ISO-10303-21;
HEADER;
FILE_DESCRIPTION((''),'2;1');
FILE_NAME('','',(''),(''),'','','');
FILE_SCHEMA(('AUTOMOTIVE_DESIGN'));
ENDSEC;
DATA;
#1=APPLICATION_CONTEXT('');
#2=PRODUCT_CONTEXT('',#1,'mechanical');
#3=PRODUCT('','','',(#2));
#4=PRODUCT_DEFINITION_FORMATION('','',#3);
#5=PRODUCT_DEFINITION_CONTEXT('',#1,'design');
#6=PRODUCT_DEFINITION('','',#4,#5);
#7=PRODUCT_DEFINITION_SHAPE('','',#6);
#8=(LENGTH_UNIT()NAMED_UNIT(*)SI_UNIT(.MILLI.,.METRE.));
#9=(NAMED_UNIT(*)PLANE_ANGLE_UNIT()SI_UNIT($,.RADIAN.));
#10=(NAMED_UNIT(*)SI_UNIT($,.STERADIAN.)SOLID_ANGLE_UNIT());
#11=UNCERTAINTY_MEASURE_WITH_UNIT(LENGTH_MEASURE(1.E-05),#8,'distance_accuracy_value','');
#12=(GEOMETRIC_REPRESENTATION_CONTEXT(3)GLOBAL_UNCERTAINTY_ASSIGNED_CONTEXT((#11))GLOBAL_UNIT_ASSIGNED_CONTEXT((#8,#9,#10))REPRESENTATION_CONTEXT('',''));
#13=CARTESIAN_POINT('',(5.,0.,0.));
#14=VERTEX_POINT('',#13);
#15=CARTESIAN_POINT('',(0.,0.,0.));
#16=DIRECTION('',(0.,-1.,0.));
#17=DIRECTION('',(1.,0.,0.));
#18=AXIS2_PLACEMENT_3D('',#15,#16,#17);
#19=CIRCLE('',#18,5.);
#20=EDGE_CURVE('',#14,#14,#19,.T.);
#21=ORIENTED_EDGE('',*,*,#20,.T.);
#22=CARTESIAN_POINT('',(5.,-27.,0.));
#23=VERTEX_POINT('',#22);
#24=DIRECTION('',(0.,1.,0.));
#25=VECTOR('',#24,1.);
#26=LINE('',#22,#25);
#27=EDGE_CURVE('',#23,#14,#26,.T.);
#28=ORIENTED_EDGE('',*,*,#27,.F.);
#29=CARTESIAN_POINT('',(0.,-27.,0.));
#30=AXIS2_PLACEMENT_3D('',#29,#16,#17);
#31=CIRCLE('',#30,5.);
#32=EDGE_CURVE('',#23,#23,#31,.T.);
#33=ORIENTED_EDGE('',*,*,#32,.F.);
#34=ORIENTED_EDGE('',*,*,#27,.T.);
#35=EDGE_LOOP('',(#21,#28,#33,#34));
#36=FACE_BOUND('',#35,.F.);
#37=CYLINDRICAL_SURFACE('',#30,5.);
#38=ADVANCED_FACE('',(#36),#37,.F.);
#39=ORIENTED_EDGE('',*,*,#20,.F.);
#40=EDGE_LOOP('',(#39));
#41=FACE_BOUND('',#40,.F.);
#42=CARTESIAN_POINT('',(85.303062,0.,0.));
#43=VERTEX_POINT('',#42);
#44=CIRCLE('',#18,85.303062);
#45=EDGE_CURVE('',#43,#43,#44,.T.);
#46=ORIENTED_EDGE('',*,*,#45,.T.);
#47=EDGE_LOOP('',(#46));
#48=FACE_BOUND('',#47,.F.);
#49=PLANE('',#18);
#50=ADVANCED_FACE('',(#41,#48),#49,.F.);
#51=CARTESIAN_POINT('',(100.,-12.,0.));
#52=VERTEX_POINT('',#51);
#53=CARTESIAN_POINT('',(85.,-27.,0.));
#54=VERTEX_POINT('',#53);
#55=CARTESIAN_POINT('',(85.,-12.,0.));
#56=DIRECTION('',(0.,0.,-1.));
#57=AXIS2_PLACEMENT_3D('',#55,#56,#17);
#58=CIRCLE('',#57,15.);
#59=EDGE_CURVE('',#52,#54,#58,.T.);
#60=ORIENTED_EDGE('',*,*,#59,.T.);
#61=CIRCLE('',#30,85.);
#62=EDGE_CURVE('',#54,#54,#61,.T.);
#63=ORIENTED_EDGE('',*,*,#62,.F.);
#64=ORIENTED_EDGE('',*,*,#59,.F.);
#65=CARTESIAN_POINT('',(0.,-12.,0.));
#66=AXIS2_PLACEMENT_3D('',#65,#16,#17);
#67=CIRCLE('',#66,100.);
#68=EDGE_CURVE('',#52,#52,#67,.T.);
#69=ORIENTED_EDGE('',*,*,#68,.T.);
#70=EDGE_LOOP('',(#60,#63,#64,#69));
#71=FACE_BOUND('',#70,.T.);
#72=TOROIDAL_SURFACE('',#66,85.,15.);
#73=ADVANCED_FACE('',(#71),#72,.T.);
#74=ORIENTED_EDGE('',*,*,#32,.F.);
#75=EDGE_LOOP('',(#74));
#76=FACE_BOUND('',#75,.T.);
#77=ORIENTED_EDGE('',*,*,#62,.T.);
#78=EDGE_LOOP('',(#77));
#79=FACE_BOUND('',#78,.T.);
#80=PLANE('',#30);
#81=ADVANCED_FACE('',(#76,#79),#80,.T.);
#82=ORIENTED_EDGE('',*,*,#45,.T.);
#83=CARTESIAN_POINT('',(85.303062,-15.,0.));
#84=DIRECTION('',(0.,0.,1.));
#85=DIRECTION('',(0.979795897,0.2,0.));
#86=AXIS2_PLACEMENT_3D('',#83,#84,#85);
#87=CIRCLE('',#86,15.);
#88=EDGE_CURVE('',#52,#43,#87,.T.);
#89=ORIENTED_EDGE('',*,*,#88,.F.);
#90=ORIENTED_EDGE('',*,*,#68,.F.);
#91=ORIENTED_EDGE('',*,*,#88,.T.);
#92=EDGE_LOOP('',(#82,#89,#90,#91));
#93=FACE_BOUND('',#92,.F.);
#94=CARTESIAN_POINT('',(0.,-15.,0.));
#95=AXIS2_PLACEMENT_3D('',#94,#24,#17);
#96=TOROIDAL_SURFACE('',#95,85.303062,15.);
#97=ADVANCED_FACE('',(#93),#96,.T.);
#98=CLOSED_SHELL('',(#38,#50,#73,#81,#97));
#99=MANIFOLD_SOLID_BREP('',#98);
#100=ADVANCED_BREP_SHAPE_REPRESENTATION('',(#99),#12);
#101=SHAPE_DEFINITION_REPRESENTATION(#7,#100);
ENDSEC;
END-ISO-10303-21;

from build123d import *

# Parameters (mm, degrees)
F0_R     = 100
F1_DEPTH = 27
F2_R     = 15
F4_R     = 5
F5_DEPTH = 30


# Not quite as in the source:
# - a fillet or chamfer that OpenCascade refuses, or shapes differently, is made with other operations: its cross-section is extruded or revolved along the edge and cut away or added


with BuildPart() as f1:
    # F0 (on Front) → F1 (new body)
    with BuildSketch(Plane.XZ):
        Circle(F0_R)
    extrude(amount=F1_DEPTH)

    # F2
    f2_edges = [f1.edges().sort_by_distance(p)[0] for p in [
        (-100, -27, 0),
    ]]
    fillet(f2_edges, radius=F2_R)

    # F3: fillet of radius 15 on 1 edges, made by hand

    # F3_s1 → F3_t2 (revolve, cut)
    with BuildSketch(Plane.XY):
        with BuildLine():
            ThreePointArc((100, -12), (94.7898945238, -3.3810499614), (85.3030615433, 0))
            Line((85.3030615433, 0), (100, 0))
            Line((100, 0), (100, -12))
        make_face()
    revolve(axis=Axis((0, 0, 0), (0, -1, 0)), mode=Mode.SUBTRACT)

    # F4 (on face) → F5 (cut)
    with BuildSketch(Plane.XZ.offset(27)):
        Circle(F4_R)
    extrude(amount=-F5_DEPTH, mode=Mode.SUBTRACT)


solid = f1.part
